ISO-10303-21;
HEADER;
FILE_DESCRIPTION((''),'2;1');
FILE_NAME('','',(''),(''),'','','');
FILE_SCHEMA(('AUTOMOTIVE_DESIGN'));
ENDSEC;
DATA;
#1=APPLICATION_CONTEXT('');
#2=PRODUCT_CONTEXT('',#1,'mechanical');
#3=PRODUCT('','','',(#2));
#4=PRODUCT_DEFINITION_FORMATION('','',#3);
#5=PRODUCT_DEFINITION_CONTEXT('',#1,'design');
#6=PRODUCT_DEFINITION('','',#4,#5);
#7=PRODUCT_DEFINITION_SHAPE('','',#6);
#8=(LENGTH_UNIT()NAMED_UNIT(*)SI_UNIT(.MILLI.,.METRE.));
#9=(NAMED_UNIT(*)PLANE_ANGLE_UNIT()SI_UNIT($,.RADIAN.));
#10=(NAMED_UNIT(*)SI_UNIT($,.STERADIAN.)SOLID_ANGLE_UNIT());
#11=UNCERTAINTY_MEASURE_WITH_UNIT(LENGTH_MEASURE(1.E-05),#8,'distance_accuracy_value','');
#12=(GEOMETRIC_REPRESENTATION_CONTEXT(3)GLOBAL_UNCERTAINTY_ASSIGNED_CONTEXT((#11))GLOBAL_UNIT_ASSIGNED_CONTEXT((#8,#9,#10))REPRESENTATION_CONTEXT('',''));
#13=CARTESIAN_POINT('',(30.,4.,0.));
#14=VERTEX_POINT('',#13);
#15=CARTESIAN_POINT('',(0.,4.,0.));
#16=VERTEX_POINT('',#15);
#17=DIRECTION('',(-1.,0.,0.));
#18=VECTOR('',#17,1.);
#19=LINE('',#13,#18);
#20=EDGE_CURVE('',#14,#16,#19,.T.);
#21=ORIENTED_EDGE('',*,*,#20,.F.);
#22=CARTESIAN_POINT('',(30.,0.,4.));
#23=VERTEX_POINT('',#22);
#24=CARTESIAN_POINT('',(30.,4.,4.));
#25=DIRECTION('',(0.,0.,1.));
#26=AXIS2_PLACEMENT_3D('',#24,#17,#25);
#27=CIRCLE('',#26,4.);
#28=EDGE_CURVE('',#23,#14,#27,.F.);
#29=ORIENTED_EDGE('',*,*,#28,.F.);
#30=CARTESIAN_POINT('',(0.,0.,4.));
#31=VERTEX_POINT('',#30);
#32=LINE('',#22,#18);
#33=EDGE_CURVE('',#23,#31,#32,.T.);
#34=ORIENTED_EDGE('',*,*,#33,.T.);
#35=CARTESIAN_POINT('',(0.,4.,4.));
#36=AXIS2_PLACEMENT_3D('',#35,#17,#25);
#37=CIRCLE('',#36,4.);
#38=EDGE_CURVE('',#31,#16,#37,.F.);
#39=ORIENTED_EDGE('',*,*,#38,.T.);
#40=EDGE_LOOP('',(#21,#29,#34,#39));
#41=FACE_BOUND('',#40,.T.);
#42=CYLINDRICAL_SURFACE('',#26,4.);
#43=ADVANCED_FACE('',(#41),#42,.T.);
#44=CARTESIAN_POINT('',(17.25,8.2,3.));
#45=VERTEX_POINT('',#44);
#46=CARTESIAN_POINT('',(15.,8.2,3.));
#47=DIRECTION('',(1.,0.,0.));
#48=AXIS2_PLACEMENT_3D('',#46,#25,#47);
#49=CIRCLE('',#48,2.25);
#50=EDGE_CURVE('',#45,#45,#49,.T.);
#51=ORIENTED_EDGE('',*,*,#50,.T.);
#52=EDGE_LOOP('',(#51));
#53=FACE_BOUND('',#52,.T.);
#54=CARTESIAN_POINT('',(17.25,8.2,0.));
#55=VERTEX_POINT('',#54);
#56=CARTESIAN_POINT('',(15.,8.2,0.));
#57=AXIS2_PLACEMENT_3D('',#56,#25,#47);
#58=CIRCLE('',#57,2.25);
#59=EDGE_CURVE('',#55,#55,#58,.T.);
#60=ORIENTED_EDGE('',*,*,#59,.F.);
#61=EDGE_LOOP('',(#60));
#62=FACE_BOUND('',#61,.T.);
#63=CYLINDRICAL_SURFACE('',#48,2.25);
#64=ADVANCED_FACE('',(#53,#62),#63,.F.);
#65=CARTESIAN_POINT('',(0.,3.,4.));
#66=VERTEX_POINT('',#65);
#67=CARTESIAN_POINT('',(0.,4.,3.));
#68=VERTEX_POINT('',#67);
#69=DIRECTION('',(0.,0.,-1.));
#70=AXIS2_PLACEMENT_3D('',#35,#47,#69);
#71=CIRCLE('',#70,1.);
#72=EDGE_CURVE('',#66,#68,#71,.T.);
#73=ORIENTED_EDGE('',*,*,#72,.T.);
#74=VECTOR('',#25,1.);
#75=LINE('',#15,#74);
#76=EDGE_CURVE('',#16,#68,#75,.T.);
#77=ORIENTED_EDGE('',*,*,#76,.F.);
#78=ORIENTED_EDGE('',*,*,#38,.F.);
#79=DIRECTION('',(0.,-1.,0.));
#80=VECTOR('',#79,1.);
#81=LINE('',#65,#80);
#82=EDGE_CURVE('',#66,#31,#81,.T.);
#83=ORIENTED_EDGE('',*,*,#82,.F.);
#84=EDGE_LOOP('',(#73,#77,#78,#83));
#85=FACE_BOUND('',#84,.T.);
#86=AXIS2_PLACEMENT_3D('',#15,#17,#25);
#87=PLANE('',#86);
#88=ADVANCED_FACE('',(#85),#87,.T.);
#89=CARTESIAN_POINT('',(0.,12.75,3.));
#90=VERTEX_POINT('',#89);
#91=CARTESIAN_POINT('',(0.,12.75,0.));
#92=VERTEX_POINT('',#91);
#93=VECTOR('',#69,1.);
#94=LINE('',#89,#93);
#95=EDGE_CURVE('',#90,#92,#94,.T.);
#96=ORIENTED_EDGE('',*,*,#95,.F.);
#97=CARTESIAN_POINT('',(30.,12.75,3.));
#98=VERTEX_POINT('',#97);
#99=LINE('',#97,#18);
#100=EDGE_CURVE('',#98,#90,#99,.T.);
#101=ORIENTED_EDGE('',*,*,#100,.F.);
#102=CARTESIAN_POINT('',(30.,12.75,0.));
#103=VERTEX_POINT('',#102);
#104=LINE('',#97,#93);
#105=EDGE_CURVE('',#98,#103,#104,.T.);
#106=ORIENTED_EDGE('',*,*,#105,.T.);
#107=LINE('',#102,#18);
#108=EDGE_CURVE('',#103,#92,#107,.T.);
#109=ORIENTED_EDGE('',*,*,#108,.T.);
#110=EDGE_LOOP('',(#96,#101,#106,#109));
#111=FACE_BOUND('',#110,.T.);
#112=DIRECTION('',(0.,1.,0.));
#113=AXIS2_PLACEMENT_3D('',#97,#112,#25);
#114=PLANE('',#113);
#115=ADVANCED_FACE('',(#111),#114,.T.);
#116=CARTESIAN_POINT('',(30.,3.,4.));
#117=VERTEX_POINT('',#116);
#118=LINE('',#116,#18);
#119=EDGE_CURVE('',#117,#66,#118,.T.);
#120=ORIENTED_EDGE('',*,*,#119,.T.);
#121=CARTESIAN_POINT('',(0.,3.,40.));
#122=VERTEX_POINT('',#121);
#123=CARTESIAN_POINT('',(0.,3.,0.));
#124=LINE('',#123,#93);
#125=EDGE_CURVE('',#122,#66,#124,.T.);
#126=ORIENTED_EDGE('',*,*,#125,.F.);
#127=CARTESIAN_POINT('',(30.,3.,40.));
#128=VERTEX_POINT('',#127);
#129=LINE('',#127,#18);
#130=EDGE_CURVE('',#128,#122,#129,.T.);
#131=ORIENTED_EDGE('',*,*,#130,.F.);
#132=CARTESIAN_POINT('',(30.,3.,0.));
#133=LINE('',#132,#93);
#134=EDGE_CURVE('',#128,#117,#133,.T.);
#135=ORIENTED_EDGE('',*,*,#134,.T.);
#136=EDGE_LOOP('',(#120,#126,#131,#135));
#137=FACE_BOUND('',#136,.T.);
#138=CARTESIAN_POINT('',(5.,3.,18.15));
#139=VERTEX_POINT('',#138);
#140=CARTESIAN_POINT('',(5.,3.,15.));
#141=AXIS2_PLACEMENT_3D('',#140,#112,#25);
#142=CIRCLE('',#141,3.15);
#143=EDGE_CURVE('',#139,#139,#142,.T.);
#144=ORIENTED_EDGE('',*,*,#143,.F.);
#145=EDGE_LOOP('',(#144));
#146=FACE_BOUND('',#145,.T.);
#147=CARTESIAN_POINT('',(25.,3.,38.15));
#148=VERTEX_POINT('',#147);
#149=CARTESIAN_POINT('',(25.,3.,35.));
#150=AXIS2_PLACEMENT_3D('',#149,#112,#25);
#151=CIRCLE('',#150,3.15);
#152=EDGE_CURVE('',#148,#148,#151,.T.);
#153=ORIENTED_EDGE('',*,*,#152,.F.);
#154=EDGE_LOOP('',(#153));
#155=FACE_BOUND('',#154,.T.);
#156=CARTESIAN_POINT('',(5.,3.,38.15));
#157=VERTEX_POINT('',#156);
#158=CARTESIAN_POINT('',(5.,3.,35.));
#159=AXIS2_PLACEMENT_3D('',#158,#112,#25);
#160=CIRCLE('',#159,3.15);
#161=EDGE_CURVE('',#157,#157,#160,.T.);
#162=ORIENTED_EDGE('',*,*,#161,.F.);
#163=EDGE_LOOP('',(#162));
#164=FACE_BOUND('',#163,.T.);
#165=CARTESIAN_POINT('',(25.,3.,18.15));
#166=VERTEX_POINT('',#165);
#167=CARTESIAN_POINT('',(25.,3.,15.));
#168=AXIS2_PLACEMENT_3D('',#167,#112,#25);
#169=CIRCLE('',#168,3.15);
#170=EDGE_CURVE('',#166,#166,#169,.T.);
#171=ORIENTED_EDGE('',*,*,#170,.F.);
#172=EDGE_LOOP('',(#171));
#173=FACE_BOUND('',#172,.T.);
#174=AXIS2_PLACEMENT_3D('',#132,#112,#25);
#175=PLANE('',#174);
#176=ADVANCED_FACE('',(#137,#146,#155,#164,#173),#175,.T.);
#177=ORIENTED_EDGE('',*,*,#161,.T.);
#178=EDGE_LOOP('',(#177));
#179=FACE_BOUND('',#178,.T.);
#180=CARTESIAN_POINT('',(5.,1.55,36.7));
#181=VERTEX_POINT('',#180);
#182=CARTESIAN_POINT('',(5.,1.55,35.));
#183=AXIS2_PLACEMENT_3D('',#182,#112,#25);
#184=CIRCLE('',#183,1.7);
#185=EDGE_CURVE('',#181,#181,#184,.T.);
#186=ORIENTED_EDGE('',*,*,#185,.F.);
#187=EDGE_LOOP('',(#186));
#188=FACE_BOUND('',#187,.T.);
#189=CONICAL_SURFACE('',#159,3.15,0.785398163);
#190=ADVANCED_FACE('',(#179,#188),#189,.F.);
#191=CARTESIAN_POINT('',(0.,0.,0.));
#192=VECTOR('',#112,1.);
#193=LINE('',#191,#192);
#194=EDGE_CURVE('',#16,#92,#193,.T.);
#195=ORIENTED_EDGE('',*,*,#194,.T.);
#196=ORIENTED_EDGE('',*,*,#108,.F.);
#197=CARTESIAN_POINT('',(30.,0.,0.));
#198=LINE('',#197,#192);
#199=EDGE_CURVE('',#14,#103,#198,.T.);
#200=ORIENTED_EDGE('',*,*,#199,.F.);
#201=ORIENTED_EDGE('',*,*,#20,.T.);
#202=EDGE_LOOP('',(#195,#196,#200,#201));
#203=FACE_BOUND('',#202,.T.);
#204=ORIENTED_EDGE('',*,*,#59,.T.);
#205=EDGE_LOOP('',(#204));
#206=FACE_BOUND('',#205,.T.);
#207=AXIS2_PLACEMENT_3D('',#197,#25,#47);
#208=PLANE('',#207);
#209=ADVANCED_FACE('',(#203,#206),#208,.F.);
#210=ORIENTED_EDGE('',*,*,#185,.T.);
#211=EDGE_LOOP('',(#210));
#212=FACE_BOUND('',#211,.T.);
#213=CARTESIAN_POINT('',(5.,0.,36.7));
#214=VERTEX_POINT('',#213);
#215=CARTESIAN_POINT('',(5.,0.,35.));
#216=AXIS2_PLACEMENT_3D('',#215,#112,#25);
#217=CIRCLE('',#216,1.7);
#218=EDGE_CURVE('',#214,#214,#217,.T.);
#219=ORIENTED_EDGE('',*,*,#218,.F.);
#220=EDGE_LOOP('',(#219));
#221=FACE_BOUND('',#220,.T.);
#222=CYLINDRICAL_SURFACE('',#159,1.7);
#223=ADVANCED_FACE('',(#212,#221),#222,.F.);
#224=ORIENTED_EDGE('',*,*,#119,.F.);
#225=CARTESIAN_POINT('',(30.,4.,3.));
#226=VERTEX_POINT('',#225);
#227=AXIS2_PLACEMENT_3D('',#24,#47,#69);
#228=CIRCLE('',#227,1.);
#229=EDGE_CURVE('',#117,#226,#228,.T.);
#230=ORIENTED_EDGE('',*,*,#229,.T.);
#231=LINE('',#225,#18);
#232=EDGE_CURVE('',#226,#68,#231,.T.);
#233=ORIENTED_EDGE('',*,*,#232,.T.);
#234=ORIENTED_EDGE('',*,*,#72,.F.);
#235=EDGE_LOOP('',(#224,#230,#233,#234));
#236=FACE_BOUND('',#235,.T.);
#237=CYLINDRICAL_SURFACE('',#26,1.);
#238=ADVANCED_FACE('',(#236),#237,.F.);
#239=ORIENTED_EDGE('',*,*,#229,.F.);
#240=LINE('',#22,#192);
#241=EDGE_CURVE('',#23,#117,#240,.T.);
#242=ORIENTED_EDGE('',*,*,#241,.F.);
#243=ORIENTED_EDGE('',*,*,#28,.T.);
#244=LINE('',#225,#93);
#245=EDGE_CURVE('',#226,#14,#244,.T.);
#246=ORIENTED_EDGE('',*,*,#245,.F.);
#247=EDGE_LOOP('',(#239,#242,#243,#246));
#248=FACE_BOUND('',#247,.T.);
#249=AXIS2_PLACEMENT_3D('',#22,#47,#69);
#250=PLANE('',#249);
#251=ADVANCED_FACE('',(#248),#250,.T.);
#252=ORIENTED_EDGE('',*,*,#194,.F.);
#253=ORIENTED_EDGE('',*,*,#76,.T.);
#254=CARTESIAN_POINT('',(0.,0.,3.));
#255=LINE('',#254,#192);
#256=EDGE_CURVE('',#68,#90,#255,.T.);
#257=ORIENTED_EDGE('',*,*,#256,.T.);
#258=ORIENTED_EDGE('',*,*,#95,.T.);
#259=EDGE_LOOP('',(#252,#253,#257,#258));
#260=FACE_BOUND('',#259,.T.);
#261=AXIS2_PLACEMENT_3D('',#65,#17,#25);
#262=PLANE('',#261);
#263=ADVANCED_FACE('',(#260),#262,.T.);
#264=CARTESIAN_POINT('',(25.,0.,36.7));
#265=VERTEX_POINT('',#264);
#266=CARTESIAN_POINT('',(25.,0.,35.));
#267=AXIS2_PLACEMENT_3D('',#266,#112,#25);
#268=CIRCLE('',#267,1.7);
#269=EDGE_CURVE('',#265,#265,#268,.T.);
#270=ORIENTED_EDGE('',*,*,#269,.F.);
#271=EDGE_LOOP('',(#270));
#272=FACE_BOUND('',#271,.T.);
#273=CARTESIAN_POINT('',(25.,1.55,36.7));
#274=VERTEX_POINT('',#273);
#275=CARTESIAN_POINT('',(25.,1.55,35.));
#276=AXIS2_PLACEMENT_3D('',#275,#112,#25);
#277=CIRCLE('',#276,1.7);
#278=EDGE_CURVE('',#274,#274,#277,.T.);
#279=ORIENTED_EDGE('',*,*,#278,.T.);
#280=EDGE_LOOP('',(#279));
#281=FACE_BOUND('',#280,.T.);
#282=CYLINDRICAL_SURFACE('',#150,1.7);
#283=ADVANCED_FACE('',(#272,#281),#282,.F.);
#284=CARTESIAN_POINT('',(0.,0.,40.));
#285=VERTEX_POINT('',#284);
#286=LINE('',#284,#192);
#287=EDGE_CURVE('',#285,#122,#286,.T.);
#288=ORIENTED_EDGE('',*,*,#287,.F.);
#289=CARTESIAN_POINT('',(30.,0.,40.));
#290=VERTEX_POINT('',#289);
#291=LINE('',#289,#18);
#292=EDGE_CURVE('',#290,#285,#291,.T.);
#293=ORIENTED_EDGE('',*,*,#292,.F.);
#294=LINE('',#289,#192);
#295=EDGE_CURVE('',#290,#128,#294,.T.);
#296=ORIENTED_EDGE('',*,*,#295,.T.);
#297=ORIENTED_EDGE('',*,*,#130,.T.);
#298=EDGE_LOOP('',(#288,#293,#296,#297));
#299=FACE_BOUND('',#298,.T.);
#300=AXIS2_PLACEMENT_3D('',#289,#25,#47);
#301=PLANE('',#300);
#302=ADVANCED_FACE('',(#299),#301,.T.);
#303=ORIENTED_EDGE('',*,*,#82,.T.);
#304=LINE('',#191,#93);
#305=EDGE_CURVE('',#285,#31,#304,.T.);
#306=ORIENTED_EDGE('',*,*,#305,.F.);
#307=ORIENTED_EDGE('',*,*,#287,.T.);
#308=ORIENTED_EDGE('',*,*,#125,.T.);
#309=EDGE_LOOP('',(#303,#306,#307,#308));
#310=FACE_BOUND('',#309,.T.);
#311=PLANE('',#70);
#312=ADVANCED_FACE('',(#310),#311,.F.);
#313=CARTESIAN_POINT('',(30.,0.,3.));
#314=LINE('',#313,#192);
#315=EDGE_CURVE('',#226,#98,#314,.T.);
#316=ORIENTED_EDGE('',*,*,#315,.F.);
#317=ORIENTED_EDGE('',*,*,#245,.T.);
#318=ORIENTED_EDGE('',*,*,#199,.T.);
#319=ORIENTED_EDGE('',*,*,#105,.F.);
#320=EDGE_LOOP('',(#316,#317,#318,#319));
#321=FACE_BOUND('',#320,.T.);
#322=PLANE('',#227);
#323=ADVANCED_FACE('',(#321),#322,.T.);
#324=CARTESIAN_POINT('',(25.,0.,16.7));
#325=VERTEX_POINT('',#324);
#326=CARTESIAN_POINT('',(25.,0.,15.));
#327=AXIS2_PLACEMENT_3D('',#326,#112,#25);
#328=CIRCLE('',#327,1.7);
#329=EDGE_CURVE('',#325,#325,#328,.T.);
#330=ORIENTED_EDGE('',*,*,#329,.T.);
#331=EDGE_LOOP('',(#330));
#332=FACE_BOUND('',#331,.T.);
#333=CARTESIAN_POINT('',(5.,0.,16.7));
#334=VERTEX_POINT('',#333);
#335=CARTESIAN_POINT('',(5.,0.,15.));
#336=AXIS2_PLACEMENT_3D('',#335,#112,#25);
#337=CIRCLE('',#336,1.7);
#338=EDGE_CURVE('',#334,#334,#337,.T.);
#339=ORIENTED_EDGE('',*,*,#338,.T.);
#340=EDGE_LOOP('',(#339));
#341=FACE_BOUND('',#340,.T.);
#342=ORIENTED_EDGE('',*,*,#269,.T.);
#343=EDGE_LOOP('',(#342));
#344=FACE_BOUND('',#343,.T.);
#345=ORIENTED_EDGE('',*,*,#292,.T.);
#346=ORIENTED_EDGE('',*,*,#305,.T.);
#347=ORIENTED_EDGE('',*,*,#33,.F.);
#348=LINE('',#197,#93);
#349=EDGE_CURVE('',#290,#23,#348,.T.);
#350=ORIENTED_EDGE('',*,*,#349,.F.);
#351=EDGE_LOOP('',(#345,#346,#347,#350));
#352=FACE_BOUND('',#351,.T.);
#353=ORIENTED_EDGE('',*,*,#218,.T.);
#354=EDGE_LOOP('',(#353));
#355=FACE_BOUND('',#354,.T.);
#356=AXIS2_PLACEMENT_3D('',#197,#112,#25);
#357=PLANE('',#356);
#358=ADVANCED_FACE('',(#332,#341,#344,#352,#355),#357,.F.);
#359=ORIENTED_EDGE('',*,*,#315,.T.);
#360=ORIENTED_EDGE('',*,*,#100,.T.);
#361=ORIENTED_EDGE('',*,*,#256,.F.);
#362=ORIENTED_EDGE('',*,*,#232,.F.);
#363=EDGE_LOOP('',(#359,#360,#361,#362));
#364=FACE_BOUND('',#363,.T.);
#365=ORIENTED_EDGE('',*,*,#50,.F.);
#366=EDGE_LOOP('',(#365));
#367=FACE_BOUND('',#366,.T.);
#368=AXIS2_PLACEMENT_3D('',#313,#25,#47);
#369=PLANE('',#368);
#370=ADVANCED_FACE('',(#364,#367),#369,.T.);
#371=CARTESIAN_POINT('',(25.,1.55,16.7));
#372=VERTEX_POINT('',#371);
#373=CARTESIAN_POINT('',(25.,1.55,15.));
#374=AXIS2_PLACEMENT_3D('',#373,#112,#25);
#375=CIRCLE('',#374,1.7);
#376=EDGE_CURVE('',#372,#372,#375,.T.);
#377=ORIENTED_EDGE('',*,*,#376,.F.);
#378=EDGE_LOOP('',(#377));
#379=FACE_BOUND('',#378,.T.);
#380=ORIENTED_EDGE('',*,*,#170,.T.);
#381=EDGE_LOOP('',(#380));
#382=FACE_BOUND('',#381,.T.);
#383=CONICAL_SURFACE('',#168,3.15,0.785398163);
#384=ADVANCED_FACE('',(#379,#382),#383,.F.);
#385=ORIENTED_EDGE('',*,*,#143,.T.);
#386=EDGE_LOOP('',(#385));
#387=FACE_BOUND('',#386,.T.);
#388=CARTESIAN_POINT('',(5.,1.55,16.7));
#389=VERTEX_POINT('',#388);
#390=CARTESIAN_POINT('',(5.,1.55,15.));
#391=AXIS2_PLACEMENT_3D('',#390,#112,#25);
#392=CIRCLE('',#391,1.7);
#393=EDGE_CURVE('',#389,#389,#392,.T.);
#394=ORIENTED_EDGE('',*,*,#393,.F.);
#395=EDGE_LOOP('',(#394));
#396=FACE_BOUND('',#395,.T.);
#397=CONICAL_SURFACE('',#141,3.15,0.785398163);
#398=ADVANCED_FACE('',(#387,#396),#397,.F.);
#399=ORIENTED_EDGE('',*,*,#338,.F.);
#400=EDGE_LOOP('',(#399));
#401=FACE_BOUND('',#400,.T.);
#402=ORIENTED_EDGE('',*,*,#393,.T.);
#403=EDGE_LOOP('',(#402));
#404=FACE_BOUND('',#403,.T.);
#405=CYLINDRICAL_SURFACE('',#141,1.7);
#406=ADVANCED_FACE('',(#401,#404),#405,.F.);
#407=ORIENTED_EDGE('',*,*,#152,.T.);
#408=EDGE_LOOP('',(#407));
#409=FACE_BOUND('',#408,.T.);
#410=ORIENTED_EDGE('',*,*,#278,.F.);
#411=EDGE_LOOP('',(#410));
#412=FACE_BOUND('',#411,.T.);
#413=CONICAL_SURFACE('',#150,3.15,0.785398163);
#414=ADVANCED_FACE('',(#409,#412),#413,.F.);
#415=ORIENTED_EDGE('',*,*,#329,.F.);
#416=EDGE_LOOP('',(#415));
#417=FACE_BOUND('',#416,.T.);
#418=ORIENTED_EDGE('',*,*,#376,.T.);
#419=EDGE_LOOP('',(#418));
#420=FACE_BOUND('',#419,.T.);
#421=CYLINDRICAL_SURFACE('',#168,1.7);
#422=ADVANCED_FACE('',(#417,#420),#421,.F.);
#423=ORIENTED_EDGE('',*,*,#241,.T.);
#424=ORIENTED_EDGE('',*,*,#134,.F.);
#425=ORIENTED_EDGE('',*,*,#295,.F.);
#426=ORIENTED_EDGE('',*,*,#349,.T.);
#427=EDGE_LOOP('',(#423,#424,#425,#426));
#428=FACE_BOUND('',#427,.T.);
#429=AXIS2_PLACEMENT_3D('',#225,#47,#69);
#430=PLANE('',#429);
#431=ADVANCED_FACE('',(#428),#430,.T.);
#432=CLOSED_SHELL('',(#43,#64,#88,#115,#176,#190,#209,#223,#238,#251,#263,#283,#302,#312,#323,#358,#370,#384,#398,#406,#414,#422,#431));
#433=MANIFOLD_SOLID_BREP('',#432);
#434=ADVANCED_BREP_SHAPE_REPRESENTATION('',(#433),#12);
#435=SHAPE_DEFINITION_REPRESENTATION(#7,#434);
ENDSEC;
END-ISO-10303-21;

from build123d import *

# Parameters (mm, degrees)
T_LE_DE_BASE_PLI_E1_DEPTH                   = 30
FRAISAGE_POUR_VIS_T_TE_FRAIS_E_M31_AT_COUNT = 2
FRAISAGE_POUR_VIS_T_TE_FRAIS_E_M31_AT_PITCH = 20
FRAISAGE_POUR_VIS_T_TE_FRAIS_E_M31_2_COUNT  = 2
FRAISAGE_POUR_VIS_T_TE_FRAIS_E_M31_2_PITCH  = 28.284271247
FRAISAGE_POUR_VIS_T_TE_FRAIS_E_M31_3_COUNT  = 2
FRAISAGE_POUR_VIS_T_TE_FRAIS_E_M31_3_PITCH  = 20
D_GAGEMENT_M41_D                            = 4.5


# Sheet-metal steps are written as plain solids
with BuildPart() as part:
    # Esquisse1 → Tôle de base pliée1 (new body)
    with BuildSketch(Plane(origin=(0, 0, 0), x_dir=(0, 0, -1), z_dir=(1, 0, 0))):
        with BuildLine():
            Line((0, 12.75), (0, 4))
            ThreePointArc((0, 4), (-1.171572875, 1.171572875), (-4, 0))
            Line((-4, 0), (-40, 0))
            Line((-40, 0), (-40, 3))
            Line((-40, 3), (-4, 3))
            ThreePointArc((-4, 3), (-3.292893219, 3.292893219), (-3, 4))
            Line((-3, 4), (-3, 12.75))
            Line((-3, 12.75), (0, 12.75))
        make_face()
    extrude(amount=T_LE_DE_BASE_PLI_E1_DEPTH)

    # Esquisse7 → Fraisage pour vis à tête fraisée M31 (revolve, cut)
    with BuildSketch(Plane(origin=(5, 3, 35), x_dir=(0, 0, 1), z_dir=(1, 0, 0))):
        Polygon((0, 0), (0, 3), (1.7, 3), (1.7, 1.45), (3.15, 0), align=None)
    fraisage_pour_vis_t_te_frais_e_m31 = revolve(axis=Axis((5, 9.35, 35), (0, -1, 0)), mode=Mode.SUBTRACT)

    # Fraisage pour vis à tête fraisée M31 at: Fraisage pour vis à tête fraisée M31 ×2
    with Locations(*[(0, 0, -i * FRAISAGE_POUR_VIS_T_TE_FRAIS_E_M31_AT_PITCH) for i in range(1, FRAISAGE_POUR_VIS_T_TE_FRAIS_E_M31_AT_COUNT)]):
        add(fraisage_pour_vis_t_te_frais_e_m31, mode=Mode.SUBTRACT)

    # Fraisage pour vis _ t_te frais_e M31 2: Fraisage pour vis à tête fraisée M31 ×2
    with Locations(*[Vector(0.7071067811865476, 0, -0.7071067811865475) * (i * FRAISAGE_POUR_VIS_T_TE_FRAIS_E_M31_2_PITCH) for i in range(1, FRAISAGE_POUR_VIS_T_TE_FRAIS_E_M31_2_COUNT)]):
        add(fraisage_pour_vis_t_te_frais_e_m31, mode=Mode.SUBTRACT)

    # Fraisage pour vis _ t_te frais_e M31 3: Fraisage pour vis à tête fraisée M31 ×2
    with Locations(*[(i * FRAISAGE_POUR_VIS_T_TE_FRAIS_E_M31_3_PITCH, 0, 0) for i in range(1, FRAISAGE_POUR_VIS_T_TE_FRAIS_E_M31_3_COUNT)]):
        add(fraisage_pour_vis_t_te_frais_e_m31, mode=Mode.SUBTRACT)

    # Dégagement M41 (through all)
    with Locations(Plane.XY.offset(3)):
        with Locations((15, 8.2)):
            Hole(D_GAGEMENT_M41_D / 2)


solid = part.part
